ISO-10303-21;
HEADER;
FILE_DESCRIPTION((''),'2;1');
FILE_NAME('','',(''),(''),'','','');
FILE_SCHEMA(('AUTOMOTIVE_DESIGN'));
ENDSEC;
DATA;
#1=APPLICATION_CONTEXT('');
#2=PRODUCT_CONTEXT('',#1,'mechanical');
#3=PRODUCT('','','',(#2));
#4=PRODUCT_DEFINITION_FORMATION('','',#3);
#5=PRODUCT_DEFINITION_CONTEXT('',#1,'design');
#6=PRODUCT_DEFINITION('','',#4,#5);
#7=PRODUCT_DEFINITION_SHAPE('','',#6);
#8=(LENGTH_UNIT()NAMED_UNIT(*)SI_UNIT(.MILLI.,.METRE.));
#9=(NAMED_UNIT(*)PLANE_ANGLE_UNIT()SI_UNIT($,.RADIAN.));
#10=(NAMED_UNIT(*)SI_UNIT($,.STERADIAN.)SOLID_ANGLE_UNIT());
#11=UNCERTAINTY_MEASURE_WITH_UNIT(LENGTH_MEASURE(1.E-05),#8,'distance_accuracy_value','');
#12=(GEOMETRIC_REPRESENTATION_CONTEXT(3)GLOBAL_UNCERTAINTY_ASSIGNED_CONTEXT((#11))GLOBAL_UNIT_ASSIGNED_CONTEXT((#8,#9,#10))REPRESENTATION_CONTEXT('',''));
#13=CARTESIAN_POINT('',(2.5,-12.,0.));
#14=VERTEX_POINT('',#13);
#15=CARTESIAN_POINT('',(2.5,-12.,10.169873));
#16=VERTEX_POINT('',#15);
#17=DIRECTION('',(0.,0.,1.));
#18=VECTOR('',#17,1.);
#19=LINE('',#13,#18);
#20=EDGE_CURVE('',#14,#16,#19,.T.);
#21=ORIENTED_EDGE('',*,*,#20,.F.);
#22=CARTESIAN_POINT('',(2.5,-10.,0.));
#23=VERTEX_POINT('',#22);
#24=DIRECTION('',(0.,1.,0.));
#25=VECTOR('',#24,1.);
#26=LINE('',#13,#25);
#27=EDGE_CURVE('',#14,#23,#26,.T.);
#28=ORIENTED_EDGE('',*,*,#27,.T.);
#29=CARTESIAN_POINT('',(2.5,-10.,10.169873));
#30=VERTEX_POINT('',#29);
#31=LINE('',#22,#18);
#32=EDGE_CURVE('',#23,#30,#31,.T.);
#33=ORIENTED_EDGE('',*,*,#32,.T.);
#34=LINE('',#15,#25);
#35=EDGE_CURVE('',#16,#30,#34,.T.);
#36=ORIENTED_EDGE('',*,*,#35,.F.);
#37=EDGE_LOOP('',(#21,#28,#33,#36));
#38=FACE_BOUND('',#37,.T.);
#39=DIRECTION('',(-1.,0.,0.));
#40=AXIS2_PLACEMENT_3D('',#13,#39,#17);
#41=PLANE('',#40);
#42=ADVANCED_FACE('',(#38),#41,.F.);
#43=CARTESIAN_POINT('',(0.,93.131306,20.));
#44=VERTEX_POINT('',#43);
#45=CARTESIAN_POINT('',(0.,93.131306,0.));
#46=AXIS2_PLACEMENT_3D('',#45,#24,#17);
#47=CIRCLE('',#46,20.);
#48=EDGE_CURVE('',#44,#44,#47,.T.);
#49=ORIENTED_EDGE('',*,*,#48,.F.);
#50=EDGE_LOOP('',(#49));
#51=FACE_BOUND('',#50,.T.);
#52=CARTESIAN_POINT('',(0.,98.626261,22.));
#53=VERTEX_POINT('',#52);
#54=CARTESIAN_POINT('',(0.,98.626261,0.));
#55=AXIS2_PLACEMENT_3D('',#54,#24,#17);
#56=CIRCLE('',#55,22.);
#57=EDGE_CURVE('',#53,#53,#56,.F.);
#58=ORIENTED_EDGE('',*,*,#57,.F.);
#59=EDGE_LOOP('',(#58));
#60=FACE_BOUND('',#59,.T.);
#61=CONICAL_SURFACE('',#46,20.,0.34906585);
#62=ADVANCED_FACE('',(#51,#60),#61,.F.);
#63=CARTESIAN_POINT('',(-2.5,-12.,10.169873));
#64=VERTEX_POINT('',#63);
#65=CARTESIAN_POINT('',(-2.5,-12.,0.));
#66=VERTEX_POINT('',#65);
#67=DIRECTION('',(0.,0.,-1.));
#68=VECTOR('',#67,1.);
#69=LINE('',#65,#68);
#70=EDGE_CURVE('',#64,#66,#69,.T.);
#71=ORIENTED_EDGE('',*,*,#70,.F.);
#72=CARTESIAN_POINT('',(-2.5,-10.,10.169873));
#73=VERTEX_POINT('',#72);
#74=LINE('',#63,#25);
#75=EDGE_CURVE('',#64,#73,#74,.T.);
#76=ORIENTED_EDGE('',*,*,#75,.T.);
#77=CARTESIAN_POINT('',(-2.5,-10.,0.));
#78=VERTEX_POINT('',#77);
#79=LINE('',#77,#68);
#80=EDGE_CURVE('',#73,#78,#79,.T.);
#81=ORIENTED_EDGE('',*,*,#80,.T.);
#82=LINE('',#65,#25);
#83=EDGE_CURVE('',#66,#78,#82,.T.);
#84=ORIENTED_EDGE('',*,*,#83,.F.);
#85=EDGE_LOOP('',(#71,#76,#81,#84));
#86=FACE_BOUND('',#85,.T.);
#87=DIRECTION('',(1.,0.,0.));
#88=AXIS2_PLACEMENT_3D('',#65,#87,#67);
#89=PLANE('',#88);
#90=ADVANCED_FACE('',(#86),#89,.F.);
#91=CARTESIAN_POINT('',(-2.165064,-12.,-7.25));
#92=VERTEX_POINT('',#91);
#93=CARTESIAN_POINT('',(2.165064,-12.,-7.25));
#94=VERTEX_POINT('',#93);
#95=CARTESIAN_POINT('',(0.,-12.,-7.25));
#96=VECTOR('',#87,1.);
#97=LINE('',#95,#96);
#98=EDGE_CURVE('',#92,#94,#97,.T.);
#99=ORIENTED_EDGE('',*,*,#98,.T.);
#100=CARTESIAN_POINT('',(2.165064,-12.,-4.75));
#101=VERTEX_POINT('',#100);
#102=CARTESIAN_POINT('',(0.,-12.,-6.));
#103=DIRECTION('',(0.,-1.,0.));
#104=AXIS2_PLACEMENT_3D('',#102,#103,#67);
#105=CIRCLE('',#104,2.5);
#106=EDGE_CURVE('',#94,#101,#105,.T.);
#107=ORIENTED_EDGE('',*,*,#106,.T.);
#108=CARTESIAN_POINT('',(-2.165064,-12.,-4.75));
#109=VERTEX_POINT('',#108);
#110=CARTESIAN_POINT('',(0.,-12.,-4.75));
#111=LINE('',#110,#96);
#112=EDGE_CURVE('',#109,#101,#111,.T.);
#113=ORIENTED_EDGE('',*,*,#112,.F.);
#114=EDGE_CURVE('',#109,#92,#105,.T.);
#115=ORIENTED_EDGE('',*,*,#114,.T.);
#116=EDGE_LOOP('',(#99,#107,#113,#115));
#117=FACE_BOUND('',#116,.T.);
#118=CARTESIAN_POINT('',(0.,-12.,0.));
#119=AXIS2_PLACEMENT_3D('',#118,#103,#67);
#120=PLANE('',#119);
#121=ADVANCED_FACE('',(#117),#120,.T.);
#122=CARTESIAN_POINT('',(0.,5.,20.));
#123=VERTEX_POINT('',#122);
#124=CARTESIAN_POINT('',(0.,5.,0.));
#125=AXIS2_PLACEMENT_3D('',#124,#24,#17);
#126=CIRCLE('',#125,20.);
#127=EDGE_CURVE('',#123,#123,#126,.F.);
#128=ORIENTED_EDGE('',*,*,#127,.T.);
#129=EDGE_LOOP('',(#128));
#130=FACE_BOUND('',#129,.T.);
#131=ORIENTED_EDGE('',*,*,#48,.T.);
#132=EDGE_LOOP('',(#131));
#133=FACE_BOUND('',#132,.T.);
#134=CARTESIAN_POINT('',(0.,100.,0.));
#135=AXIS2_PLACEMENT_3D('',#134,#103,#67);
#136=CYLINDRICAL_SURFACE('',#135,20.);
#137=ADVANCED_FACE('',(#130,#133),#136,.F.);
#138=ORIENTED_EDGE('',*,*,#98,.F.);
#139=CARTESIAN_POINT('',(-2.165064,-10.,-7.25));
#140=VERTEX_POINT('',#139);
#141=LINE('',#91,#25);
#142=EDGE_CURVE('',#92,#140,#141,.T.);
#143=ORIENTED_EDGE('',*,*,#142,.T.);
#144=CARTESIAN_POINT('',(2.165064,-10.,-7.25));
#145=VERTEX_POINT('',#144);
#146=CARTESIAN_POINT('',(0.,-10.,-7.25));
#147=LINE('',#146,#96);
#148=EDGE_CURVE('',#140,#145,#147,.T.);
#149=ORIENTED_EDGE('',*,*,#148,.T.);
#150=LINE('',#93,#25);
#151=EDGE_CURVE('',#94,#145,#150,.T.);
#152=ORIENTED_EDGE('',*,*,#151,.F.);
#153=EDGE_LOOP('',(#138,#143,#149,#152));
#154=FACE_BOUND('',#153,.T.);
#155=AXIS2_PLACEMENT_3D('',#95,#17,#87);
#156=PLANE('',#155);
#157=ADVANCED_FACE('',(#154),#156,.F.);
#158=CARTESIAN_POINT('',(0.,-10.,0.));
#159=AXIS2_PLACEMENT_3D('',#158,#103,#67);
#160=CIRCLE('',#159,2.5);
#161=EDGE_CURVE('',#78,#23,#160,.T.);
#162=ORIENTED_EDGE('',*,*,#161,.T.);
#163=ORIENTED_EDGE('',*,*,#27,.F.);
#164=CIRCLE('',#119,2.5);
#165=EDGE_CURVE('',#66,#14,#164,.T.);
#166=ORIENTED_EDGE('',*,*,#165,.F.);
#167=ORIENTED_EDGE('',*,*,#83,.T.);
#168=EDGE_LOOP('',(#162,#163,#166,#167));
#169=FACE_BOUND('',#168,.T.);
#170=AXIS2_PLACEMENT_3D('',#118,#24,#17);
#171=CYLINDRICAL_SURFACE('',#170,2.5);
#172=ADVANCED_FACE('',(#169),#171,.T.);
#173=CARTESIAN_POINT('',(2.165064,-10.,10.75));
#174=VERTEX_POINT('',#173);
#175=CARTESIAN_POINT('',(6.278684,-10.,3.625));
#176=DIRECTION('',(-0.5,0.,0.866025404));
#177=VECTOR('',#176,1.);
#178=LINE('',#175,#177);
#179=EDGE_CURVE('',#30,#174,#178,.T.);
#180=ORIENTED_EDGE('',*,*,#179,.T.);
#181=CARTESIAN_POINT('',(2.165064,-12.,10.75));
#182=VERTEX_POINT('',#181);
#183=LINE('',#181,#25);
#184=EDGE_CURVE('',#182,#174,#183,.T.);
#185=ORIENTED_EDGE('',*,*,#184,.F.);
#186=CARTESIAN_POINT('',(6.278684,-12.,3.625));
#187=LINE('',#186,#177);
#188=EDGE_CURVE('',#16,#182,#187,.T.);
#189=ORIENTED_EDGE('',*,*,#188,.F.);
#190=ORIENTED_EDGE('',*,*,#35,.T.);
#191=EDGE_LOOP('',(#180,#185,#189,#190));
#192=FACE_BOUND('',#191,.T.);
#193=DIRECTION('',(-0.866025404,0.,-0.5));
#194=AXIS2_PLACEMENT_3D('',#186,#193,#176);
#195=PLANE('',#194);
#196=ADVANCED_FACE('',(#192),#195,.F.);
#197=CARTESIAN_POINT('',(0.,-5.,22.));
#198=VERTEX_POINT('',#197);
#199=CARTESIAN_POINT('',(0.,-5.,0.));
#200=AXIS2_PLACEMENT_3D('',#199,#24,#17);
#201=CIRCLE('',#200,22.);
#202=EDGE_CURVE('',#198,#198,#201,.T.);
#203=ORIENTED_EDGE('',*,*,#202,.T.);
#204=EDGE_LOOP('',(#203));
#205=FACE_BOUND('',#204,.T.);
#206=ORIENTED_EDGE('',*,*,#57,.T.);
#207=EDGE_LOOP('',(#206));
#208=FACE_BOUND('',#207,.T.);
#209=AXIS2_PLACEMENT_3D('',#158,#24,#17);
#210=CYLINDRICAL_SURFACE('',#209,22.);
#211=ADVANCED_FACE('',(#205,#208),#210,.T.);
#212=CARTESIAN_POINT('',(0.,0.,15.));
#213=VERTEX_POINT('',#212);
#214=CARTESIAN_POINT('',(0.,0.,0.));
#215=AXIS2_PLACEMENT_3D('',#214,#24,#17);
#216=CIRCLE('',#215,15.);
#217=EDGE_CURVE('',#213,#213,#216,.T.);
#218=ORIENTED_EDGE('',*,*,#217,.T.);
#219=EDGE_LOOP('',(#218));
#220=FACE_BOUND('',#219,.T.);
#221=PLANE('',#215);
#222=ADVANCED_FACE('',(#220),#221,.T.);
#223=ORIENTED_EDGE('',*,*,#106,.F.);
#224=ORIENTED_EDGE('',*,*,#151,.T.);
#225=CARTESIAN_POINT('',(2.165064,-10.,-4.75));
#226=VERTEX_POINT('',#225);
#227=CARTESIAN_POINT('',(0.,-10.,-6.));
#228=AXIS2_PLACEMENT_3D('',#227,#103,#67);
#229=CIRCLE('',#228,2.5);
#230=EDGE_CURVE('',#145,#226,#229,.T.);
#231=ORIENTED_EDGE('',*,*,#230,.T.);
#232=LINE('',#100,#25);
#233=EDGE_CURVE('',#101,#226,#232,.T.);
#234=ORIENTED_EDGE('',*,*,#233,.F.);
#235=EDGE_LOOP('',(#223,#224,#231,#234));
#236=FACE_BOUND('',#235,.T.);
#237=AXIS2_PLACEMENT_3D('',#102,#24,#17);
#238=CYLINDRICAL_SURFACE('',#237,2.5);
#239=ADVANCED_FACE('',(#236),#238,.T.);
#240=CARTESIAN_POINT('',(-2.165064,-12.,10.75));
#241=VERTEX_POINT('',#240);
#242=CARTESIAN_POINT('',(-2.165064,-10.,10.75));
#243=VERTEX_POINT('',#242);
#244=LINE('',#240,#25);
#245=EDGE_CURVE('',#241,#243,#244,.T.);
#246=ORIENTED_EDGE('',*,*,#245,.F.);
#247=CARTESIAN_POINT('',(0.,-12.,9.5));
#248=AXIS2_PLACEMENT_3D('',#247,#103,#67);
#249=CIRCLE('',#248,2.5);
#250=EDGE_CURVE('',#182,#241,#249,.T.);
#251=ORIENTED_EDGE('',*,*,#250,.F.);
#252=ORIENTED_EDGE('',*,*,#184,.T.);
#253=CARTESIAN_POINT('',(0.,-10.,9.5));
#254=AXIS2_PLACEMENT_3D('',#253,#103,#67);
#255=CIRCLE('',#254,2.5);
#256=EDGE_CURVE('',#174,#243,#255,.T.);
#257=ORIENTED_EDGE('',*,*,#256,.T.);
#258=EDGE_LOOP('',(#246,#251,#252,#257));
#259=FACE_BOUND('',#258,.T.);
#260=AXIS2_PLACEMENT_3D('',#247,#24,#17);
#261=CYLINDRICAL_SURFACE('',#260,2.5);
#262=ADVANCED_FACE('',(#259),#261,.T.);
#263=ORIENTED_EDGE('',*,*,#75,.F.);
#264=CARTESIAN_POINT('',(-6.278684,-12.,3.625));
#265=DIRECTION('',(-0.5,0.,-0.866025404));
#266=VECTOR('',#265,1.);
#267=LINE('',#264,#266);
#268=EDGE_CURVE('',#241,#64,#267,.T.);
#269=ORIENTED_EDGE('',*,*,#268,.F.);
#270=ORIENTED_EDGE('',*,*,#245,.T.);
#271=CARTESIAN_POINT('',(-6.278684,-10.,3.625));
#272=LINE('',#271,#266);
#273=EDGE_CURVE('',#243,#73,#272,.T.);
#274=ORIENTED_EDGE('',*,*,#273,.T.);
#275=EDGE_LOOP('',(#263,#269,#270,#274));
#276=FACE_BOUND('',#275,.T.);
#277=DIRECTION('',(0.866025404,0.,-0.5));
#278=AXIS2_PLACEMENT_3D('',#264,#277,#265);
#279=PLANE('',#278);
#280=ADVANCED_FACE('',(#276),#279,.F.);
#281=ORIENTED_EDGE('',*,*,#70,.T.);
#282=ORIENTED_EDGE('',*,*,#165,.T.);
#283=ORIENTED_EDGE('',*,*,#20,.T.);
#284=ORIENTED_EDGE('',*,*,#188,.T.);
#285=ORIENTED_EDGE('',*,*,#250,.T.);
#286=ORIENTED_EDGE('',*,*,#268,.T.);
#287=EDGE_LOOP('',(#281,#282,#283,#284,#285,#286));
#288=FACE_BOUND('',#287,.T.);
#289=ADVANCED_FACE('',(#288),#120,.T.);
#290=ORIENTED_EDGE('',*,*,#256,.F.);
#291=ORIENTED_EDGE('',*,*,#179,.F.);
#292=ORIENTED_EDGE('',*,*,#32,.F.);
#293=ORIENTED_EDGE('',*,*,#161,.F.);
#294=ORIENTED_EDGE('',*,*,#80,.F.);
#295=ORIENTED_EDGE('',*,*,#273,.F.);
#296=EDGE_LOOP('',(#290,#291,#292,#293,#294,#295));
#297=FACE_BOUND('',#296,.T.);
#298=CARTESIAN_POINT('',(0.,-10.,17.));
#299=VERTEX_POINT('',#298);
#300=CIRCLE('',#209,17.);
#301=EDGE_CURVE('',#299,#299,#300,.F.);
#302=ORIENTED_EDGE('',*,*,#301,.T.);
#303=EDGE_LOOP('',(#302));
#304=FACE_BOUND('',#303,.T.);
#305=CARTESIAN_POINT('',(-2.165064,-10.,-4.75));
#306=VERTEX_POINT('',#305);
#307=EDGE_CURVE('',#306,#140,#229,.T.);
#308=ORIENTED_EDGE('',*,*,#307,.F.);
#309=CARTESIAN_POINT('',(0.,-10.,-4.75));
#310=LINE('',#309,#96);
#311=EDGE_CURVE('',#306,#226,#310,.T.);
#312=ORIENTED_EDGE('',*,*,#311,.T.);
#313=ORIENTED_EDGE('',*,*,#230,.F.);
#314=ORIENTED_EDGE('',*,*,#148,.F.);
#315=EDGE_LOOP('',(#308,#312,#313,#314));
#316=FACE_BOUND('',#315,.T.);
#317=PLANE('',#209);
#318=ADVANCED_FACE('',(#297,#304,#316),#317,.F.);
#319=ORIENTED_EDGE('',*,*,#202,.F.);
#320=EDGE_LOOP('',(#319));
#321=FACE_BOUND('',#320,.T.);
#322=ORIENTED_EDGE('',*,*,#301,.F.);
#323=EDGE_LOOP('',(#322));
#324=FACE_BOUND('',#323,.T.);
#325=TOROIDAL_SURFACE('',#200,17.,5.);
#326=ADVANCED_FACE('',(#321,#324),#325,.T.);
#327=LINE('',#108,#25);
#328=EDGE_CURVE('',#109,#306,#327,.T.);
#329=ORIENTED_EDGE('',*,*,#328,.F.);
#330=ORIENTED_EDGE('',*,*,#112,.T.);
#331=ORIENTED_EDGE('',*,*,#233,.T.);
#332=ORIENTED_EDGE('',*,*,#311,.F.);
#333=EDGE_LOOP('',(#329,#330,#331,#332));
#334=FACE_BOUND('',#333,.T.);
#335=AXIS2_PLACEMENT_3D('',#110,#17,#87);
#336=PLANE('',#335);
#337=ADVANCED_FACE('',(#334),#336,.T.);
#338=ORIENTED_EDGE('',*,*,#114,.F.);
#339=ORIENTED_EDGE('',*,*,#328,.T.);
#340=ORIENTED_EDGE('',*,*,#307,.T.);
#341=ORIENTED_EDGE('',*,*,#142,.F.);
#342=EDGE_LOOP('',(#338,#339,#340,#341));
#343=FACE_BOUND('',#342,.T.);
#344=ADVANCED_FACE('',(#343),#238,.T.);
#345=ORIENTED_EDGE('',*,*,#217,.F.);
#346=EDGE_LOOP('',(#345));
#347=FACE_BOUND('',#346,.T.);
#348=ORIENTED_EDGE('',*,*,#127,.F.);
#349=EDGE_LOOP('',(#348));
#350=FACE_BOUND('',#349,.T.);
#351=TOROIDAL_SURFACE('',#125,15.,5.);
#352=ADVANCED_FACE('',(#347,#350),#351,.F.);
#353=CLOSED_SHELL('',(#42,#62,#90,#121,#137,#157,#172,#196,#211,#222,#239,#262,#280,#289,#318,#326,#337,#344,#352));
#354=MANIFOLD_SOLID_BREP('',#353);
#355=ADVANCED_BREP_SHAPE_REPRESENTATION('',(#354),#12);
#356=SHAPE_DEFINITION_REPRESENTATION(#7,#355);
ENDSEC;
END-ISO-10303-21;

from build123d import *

# Parameters (mm, degrees)
SKETCH1_R           = 22
SKETCH1_R_2         = 20
BOSS_EXTRUDE1_DEPTH = 10
BOSS_EXTRUDE2_START = 100
SKETCH1_3_R         = 22
SKETCH1_3_R_2       = 20
BOSS_EXTRUDE2_DEPTH = 100
FILLET1_R           = 5
FILLET2_R           = 5
BOSS_EXTRUDE3_DEPTH = 2
CHAMFER1_SIZE       = 2.5
CHAMFER1_SIZE_2     = 6.868693549


with BuildPart() as part:
    # Sketch1 → Boss-Extrude1 (new body)
    # profile 1 of 2: a face of its own
    with BuildSketch(Plane(origin=(0, 0, 0), x_dir=(1, 0, 0), z_dir=(0, 1, 0))):
        with Locations(Location((0, 0, 0), (0, 0, 270))):
            Circle(SKETCH1_R)
        Circle(SKETCH1_R_2, mode=Mode.SUBTRACT)
    # profile 2 of 2: a face of its own
    with BuildSketch(Plane(origin=(0, 0, 0), x_dir=(1, 0, 0), z_dir=(0, 1, 0))):
        Circle(SKETCH1_R_2)
    extrude(amount=-BOSS_EXTRUDE1_DEPTH)

    # Sketch1<3> → Boss-Extrude2 (add)
    with BuildSketch(Plane(origin=(0, 0, 0), x_dir=(1, 0, 0), z_dir=(0, 1, 0)).offset(BOSS_EXTRUDE2_START)):
        with Locations(Location((0, 0, 0), (0, 0, 270))):
            Circle(SKETCH1_3_R)
        with Locations(Location((0, 0, 0), (0, 0, 270))):
            Circle(SKETCH1_3_R_2, mode=Mode.SUBTRACT)
    extrude(amount=-BOSS_EXTRUDE2_DEPTH)

    # Fillet1
    fillet1_edges = [part.edges().sort_by_distance(p)[0] for p in [
        (0, 0, -20),
    ]]
    fillet(fillet1_edges, radius=FILLET1_R)

    # Fillet2
    fillet2_edges = [part.edges().sort_by_distance(p)[0] for p in [
        (0, -10, -22),
    ]]
    fillet(fillet2_edges, radius=FILLET2_R)

    # Sketch2 → Boss-Extrude3 (add)
    with BuildSketch(Plane.XZ.offset(10)):
        with BuildLine():
            ThreePointArc((2.165063509, 10.75), (0, 12), (-2.165063509, 10.75))
            Line((-2.165063509, 10.75), (-2.5, 10.169872981))
            Line((-2.5, 10.169872981), (-2.5, 0))
            ThreePointArc((-2.5, 0), (0, -2.5), (2.5, 0))
            Line((2.5, 0), (2.5, 10.169872981))
            Line((2.5, 10.169872981), (2.165063509, 10.75))
        make_face()
        with BuildLine():
            ThreePointArc((-2.165063509, -4.75), (-2.5, -6), (-2.165063509, -7.25))
            Line((-2.165063509, -7.25), (2.165063509, -7.25))
            ThreePointArc((2.165063509, -7.25), (2.5, -6), (2.165063509, -4.75))
            Line((2.165063509, -4.75), (-2.165063509, -4.75))
        make_face()
    extrude(amount=BOSS_EXTRUDE3_DEPTH)

    # Chamfer1
    # the kernel refuses this chamfer: 6.868693549, 2.5 mm, written as the material it takes off along each edge
    with BuildSketch(Plane(origin=(0, 100, 0), x_dir=(0, 0, 1), z_dir=(-1, 0, 0))) as chamfer1_piece_1:
        Polygon((20 + CHAMFER1_SIZE, 0), (20, -CHAMFER1_SIZE_2), (20, 0), align=None)
    revolve(axis=Axis((0, 100, 0), (0, 1, 0)), mode=Mode.SUBTRACT)


solid = part.part
